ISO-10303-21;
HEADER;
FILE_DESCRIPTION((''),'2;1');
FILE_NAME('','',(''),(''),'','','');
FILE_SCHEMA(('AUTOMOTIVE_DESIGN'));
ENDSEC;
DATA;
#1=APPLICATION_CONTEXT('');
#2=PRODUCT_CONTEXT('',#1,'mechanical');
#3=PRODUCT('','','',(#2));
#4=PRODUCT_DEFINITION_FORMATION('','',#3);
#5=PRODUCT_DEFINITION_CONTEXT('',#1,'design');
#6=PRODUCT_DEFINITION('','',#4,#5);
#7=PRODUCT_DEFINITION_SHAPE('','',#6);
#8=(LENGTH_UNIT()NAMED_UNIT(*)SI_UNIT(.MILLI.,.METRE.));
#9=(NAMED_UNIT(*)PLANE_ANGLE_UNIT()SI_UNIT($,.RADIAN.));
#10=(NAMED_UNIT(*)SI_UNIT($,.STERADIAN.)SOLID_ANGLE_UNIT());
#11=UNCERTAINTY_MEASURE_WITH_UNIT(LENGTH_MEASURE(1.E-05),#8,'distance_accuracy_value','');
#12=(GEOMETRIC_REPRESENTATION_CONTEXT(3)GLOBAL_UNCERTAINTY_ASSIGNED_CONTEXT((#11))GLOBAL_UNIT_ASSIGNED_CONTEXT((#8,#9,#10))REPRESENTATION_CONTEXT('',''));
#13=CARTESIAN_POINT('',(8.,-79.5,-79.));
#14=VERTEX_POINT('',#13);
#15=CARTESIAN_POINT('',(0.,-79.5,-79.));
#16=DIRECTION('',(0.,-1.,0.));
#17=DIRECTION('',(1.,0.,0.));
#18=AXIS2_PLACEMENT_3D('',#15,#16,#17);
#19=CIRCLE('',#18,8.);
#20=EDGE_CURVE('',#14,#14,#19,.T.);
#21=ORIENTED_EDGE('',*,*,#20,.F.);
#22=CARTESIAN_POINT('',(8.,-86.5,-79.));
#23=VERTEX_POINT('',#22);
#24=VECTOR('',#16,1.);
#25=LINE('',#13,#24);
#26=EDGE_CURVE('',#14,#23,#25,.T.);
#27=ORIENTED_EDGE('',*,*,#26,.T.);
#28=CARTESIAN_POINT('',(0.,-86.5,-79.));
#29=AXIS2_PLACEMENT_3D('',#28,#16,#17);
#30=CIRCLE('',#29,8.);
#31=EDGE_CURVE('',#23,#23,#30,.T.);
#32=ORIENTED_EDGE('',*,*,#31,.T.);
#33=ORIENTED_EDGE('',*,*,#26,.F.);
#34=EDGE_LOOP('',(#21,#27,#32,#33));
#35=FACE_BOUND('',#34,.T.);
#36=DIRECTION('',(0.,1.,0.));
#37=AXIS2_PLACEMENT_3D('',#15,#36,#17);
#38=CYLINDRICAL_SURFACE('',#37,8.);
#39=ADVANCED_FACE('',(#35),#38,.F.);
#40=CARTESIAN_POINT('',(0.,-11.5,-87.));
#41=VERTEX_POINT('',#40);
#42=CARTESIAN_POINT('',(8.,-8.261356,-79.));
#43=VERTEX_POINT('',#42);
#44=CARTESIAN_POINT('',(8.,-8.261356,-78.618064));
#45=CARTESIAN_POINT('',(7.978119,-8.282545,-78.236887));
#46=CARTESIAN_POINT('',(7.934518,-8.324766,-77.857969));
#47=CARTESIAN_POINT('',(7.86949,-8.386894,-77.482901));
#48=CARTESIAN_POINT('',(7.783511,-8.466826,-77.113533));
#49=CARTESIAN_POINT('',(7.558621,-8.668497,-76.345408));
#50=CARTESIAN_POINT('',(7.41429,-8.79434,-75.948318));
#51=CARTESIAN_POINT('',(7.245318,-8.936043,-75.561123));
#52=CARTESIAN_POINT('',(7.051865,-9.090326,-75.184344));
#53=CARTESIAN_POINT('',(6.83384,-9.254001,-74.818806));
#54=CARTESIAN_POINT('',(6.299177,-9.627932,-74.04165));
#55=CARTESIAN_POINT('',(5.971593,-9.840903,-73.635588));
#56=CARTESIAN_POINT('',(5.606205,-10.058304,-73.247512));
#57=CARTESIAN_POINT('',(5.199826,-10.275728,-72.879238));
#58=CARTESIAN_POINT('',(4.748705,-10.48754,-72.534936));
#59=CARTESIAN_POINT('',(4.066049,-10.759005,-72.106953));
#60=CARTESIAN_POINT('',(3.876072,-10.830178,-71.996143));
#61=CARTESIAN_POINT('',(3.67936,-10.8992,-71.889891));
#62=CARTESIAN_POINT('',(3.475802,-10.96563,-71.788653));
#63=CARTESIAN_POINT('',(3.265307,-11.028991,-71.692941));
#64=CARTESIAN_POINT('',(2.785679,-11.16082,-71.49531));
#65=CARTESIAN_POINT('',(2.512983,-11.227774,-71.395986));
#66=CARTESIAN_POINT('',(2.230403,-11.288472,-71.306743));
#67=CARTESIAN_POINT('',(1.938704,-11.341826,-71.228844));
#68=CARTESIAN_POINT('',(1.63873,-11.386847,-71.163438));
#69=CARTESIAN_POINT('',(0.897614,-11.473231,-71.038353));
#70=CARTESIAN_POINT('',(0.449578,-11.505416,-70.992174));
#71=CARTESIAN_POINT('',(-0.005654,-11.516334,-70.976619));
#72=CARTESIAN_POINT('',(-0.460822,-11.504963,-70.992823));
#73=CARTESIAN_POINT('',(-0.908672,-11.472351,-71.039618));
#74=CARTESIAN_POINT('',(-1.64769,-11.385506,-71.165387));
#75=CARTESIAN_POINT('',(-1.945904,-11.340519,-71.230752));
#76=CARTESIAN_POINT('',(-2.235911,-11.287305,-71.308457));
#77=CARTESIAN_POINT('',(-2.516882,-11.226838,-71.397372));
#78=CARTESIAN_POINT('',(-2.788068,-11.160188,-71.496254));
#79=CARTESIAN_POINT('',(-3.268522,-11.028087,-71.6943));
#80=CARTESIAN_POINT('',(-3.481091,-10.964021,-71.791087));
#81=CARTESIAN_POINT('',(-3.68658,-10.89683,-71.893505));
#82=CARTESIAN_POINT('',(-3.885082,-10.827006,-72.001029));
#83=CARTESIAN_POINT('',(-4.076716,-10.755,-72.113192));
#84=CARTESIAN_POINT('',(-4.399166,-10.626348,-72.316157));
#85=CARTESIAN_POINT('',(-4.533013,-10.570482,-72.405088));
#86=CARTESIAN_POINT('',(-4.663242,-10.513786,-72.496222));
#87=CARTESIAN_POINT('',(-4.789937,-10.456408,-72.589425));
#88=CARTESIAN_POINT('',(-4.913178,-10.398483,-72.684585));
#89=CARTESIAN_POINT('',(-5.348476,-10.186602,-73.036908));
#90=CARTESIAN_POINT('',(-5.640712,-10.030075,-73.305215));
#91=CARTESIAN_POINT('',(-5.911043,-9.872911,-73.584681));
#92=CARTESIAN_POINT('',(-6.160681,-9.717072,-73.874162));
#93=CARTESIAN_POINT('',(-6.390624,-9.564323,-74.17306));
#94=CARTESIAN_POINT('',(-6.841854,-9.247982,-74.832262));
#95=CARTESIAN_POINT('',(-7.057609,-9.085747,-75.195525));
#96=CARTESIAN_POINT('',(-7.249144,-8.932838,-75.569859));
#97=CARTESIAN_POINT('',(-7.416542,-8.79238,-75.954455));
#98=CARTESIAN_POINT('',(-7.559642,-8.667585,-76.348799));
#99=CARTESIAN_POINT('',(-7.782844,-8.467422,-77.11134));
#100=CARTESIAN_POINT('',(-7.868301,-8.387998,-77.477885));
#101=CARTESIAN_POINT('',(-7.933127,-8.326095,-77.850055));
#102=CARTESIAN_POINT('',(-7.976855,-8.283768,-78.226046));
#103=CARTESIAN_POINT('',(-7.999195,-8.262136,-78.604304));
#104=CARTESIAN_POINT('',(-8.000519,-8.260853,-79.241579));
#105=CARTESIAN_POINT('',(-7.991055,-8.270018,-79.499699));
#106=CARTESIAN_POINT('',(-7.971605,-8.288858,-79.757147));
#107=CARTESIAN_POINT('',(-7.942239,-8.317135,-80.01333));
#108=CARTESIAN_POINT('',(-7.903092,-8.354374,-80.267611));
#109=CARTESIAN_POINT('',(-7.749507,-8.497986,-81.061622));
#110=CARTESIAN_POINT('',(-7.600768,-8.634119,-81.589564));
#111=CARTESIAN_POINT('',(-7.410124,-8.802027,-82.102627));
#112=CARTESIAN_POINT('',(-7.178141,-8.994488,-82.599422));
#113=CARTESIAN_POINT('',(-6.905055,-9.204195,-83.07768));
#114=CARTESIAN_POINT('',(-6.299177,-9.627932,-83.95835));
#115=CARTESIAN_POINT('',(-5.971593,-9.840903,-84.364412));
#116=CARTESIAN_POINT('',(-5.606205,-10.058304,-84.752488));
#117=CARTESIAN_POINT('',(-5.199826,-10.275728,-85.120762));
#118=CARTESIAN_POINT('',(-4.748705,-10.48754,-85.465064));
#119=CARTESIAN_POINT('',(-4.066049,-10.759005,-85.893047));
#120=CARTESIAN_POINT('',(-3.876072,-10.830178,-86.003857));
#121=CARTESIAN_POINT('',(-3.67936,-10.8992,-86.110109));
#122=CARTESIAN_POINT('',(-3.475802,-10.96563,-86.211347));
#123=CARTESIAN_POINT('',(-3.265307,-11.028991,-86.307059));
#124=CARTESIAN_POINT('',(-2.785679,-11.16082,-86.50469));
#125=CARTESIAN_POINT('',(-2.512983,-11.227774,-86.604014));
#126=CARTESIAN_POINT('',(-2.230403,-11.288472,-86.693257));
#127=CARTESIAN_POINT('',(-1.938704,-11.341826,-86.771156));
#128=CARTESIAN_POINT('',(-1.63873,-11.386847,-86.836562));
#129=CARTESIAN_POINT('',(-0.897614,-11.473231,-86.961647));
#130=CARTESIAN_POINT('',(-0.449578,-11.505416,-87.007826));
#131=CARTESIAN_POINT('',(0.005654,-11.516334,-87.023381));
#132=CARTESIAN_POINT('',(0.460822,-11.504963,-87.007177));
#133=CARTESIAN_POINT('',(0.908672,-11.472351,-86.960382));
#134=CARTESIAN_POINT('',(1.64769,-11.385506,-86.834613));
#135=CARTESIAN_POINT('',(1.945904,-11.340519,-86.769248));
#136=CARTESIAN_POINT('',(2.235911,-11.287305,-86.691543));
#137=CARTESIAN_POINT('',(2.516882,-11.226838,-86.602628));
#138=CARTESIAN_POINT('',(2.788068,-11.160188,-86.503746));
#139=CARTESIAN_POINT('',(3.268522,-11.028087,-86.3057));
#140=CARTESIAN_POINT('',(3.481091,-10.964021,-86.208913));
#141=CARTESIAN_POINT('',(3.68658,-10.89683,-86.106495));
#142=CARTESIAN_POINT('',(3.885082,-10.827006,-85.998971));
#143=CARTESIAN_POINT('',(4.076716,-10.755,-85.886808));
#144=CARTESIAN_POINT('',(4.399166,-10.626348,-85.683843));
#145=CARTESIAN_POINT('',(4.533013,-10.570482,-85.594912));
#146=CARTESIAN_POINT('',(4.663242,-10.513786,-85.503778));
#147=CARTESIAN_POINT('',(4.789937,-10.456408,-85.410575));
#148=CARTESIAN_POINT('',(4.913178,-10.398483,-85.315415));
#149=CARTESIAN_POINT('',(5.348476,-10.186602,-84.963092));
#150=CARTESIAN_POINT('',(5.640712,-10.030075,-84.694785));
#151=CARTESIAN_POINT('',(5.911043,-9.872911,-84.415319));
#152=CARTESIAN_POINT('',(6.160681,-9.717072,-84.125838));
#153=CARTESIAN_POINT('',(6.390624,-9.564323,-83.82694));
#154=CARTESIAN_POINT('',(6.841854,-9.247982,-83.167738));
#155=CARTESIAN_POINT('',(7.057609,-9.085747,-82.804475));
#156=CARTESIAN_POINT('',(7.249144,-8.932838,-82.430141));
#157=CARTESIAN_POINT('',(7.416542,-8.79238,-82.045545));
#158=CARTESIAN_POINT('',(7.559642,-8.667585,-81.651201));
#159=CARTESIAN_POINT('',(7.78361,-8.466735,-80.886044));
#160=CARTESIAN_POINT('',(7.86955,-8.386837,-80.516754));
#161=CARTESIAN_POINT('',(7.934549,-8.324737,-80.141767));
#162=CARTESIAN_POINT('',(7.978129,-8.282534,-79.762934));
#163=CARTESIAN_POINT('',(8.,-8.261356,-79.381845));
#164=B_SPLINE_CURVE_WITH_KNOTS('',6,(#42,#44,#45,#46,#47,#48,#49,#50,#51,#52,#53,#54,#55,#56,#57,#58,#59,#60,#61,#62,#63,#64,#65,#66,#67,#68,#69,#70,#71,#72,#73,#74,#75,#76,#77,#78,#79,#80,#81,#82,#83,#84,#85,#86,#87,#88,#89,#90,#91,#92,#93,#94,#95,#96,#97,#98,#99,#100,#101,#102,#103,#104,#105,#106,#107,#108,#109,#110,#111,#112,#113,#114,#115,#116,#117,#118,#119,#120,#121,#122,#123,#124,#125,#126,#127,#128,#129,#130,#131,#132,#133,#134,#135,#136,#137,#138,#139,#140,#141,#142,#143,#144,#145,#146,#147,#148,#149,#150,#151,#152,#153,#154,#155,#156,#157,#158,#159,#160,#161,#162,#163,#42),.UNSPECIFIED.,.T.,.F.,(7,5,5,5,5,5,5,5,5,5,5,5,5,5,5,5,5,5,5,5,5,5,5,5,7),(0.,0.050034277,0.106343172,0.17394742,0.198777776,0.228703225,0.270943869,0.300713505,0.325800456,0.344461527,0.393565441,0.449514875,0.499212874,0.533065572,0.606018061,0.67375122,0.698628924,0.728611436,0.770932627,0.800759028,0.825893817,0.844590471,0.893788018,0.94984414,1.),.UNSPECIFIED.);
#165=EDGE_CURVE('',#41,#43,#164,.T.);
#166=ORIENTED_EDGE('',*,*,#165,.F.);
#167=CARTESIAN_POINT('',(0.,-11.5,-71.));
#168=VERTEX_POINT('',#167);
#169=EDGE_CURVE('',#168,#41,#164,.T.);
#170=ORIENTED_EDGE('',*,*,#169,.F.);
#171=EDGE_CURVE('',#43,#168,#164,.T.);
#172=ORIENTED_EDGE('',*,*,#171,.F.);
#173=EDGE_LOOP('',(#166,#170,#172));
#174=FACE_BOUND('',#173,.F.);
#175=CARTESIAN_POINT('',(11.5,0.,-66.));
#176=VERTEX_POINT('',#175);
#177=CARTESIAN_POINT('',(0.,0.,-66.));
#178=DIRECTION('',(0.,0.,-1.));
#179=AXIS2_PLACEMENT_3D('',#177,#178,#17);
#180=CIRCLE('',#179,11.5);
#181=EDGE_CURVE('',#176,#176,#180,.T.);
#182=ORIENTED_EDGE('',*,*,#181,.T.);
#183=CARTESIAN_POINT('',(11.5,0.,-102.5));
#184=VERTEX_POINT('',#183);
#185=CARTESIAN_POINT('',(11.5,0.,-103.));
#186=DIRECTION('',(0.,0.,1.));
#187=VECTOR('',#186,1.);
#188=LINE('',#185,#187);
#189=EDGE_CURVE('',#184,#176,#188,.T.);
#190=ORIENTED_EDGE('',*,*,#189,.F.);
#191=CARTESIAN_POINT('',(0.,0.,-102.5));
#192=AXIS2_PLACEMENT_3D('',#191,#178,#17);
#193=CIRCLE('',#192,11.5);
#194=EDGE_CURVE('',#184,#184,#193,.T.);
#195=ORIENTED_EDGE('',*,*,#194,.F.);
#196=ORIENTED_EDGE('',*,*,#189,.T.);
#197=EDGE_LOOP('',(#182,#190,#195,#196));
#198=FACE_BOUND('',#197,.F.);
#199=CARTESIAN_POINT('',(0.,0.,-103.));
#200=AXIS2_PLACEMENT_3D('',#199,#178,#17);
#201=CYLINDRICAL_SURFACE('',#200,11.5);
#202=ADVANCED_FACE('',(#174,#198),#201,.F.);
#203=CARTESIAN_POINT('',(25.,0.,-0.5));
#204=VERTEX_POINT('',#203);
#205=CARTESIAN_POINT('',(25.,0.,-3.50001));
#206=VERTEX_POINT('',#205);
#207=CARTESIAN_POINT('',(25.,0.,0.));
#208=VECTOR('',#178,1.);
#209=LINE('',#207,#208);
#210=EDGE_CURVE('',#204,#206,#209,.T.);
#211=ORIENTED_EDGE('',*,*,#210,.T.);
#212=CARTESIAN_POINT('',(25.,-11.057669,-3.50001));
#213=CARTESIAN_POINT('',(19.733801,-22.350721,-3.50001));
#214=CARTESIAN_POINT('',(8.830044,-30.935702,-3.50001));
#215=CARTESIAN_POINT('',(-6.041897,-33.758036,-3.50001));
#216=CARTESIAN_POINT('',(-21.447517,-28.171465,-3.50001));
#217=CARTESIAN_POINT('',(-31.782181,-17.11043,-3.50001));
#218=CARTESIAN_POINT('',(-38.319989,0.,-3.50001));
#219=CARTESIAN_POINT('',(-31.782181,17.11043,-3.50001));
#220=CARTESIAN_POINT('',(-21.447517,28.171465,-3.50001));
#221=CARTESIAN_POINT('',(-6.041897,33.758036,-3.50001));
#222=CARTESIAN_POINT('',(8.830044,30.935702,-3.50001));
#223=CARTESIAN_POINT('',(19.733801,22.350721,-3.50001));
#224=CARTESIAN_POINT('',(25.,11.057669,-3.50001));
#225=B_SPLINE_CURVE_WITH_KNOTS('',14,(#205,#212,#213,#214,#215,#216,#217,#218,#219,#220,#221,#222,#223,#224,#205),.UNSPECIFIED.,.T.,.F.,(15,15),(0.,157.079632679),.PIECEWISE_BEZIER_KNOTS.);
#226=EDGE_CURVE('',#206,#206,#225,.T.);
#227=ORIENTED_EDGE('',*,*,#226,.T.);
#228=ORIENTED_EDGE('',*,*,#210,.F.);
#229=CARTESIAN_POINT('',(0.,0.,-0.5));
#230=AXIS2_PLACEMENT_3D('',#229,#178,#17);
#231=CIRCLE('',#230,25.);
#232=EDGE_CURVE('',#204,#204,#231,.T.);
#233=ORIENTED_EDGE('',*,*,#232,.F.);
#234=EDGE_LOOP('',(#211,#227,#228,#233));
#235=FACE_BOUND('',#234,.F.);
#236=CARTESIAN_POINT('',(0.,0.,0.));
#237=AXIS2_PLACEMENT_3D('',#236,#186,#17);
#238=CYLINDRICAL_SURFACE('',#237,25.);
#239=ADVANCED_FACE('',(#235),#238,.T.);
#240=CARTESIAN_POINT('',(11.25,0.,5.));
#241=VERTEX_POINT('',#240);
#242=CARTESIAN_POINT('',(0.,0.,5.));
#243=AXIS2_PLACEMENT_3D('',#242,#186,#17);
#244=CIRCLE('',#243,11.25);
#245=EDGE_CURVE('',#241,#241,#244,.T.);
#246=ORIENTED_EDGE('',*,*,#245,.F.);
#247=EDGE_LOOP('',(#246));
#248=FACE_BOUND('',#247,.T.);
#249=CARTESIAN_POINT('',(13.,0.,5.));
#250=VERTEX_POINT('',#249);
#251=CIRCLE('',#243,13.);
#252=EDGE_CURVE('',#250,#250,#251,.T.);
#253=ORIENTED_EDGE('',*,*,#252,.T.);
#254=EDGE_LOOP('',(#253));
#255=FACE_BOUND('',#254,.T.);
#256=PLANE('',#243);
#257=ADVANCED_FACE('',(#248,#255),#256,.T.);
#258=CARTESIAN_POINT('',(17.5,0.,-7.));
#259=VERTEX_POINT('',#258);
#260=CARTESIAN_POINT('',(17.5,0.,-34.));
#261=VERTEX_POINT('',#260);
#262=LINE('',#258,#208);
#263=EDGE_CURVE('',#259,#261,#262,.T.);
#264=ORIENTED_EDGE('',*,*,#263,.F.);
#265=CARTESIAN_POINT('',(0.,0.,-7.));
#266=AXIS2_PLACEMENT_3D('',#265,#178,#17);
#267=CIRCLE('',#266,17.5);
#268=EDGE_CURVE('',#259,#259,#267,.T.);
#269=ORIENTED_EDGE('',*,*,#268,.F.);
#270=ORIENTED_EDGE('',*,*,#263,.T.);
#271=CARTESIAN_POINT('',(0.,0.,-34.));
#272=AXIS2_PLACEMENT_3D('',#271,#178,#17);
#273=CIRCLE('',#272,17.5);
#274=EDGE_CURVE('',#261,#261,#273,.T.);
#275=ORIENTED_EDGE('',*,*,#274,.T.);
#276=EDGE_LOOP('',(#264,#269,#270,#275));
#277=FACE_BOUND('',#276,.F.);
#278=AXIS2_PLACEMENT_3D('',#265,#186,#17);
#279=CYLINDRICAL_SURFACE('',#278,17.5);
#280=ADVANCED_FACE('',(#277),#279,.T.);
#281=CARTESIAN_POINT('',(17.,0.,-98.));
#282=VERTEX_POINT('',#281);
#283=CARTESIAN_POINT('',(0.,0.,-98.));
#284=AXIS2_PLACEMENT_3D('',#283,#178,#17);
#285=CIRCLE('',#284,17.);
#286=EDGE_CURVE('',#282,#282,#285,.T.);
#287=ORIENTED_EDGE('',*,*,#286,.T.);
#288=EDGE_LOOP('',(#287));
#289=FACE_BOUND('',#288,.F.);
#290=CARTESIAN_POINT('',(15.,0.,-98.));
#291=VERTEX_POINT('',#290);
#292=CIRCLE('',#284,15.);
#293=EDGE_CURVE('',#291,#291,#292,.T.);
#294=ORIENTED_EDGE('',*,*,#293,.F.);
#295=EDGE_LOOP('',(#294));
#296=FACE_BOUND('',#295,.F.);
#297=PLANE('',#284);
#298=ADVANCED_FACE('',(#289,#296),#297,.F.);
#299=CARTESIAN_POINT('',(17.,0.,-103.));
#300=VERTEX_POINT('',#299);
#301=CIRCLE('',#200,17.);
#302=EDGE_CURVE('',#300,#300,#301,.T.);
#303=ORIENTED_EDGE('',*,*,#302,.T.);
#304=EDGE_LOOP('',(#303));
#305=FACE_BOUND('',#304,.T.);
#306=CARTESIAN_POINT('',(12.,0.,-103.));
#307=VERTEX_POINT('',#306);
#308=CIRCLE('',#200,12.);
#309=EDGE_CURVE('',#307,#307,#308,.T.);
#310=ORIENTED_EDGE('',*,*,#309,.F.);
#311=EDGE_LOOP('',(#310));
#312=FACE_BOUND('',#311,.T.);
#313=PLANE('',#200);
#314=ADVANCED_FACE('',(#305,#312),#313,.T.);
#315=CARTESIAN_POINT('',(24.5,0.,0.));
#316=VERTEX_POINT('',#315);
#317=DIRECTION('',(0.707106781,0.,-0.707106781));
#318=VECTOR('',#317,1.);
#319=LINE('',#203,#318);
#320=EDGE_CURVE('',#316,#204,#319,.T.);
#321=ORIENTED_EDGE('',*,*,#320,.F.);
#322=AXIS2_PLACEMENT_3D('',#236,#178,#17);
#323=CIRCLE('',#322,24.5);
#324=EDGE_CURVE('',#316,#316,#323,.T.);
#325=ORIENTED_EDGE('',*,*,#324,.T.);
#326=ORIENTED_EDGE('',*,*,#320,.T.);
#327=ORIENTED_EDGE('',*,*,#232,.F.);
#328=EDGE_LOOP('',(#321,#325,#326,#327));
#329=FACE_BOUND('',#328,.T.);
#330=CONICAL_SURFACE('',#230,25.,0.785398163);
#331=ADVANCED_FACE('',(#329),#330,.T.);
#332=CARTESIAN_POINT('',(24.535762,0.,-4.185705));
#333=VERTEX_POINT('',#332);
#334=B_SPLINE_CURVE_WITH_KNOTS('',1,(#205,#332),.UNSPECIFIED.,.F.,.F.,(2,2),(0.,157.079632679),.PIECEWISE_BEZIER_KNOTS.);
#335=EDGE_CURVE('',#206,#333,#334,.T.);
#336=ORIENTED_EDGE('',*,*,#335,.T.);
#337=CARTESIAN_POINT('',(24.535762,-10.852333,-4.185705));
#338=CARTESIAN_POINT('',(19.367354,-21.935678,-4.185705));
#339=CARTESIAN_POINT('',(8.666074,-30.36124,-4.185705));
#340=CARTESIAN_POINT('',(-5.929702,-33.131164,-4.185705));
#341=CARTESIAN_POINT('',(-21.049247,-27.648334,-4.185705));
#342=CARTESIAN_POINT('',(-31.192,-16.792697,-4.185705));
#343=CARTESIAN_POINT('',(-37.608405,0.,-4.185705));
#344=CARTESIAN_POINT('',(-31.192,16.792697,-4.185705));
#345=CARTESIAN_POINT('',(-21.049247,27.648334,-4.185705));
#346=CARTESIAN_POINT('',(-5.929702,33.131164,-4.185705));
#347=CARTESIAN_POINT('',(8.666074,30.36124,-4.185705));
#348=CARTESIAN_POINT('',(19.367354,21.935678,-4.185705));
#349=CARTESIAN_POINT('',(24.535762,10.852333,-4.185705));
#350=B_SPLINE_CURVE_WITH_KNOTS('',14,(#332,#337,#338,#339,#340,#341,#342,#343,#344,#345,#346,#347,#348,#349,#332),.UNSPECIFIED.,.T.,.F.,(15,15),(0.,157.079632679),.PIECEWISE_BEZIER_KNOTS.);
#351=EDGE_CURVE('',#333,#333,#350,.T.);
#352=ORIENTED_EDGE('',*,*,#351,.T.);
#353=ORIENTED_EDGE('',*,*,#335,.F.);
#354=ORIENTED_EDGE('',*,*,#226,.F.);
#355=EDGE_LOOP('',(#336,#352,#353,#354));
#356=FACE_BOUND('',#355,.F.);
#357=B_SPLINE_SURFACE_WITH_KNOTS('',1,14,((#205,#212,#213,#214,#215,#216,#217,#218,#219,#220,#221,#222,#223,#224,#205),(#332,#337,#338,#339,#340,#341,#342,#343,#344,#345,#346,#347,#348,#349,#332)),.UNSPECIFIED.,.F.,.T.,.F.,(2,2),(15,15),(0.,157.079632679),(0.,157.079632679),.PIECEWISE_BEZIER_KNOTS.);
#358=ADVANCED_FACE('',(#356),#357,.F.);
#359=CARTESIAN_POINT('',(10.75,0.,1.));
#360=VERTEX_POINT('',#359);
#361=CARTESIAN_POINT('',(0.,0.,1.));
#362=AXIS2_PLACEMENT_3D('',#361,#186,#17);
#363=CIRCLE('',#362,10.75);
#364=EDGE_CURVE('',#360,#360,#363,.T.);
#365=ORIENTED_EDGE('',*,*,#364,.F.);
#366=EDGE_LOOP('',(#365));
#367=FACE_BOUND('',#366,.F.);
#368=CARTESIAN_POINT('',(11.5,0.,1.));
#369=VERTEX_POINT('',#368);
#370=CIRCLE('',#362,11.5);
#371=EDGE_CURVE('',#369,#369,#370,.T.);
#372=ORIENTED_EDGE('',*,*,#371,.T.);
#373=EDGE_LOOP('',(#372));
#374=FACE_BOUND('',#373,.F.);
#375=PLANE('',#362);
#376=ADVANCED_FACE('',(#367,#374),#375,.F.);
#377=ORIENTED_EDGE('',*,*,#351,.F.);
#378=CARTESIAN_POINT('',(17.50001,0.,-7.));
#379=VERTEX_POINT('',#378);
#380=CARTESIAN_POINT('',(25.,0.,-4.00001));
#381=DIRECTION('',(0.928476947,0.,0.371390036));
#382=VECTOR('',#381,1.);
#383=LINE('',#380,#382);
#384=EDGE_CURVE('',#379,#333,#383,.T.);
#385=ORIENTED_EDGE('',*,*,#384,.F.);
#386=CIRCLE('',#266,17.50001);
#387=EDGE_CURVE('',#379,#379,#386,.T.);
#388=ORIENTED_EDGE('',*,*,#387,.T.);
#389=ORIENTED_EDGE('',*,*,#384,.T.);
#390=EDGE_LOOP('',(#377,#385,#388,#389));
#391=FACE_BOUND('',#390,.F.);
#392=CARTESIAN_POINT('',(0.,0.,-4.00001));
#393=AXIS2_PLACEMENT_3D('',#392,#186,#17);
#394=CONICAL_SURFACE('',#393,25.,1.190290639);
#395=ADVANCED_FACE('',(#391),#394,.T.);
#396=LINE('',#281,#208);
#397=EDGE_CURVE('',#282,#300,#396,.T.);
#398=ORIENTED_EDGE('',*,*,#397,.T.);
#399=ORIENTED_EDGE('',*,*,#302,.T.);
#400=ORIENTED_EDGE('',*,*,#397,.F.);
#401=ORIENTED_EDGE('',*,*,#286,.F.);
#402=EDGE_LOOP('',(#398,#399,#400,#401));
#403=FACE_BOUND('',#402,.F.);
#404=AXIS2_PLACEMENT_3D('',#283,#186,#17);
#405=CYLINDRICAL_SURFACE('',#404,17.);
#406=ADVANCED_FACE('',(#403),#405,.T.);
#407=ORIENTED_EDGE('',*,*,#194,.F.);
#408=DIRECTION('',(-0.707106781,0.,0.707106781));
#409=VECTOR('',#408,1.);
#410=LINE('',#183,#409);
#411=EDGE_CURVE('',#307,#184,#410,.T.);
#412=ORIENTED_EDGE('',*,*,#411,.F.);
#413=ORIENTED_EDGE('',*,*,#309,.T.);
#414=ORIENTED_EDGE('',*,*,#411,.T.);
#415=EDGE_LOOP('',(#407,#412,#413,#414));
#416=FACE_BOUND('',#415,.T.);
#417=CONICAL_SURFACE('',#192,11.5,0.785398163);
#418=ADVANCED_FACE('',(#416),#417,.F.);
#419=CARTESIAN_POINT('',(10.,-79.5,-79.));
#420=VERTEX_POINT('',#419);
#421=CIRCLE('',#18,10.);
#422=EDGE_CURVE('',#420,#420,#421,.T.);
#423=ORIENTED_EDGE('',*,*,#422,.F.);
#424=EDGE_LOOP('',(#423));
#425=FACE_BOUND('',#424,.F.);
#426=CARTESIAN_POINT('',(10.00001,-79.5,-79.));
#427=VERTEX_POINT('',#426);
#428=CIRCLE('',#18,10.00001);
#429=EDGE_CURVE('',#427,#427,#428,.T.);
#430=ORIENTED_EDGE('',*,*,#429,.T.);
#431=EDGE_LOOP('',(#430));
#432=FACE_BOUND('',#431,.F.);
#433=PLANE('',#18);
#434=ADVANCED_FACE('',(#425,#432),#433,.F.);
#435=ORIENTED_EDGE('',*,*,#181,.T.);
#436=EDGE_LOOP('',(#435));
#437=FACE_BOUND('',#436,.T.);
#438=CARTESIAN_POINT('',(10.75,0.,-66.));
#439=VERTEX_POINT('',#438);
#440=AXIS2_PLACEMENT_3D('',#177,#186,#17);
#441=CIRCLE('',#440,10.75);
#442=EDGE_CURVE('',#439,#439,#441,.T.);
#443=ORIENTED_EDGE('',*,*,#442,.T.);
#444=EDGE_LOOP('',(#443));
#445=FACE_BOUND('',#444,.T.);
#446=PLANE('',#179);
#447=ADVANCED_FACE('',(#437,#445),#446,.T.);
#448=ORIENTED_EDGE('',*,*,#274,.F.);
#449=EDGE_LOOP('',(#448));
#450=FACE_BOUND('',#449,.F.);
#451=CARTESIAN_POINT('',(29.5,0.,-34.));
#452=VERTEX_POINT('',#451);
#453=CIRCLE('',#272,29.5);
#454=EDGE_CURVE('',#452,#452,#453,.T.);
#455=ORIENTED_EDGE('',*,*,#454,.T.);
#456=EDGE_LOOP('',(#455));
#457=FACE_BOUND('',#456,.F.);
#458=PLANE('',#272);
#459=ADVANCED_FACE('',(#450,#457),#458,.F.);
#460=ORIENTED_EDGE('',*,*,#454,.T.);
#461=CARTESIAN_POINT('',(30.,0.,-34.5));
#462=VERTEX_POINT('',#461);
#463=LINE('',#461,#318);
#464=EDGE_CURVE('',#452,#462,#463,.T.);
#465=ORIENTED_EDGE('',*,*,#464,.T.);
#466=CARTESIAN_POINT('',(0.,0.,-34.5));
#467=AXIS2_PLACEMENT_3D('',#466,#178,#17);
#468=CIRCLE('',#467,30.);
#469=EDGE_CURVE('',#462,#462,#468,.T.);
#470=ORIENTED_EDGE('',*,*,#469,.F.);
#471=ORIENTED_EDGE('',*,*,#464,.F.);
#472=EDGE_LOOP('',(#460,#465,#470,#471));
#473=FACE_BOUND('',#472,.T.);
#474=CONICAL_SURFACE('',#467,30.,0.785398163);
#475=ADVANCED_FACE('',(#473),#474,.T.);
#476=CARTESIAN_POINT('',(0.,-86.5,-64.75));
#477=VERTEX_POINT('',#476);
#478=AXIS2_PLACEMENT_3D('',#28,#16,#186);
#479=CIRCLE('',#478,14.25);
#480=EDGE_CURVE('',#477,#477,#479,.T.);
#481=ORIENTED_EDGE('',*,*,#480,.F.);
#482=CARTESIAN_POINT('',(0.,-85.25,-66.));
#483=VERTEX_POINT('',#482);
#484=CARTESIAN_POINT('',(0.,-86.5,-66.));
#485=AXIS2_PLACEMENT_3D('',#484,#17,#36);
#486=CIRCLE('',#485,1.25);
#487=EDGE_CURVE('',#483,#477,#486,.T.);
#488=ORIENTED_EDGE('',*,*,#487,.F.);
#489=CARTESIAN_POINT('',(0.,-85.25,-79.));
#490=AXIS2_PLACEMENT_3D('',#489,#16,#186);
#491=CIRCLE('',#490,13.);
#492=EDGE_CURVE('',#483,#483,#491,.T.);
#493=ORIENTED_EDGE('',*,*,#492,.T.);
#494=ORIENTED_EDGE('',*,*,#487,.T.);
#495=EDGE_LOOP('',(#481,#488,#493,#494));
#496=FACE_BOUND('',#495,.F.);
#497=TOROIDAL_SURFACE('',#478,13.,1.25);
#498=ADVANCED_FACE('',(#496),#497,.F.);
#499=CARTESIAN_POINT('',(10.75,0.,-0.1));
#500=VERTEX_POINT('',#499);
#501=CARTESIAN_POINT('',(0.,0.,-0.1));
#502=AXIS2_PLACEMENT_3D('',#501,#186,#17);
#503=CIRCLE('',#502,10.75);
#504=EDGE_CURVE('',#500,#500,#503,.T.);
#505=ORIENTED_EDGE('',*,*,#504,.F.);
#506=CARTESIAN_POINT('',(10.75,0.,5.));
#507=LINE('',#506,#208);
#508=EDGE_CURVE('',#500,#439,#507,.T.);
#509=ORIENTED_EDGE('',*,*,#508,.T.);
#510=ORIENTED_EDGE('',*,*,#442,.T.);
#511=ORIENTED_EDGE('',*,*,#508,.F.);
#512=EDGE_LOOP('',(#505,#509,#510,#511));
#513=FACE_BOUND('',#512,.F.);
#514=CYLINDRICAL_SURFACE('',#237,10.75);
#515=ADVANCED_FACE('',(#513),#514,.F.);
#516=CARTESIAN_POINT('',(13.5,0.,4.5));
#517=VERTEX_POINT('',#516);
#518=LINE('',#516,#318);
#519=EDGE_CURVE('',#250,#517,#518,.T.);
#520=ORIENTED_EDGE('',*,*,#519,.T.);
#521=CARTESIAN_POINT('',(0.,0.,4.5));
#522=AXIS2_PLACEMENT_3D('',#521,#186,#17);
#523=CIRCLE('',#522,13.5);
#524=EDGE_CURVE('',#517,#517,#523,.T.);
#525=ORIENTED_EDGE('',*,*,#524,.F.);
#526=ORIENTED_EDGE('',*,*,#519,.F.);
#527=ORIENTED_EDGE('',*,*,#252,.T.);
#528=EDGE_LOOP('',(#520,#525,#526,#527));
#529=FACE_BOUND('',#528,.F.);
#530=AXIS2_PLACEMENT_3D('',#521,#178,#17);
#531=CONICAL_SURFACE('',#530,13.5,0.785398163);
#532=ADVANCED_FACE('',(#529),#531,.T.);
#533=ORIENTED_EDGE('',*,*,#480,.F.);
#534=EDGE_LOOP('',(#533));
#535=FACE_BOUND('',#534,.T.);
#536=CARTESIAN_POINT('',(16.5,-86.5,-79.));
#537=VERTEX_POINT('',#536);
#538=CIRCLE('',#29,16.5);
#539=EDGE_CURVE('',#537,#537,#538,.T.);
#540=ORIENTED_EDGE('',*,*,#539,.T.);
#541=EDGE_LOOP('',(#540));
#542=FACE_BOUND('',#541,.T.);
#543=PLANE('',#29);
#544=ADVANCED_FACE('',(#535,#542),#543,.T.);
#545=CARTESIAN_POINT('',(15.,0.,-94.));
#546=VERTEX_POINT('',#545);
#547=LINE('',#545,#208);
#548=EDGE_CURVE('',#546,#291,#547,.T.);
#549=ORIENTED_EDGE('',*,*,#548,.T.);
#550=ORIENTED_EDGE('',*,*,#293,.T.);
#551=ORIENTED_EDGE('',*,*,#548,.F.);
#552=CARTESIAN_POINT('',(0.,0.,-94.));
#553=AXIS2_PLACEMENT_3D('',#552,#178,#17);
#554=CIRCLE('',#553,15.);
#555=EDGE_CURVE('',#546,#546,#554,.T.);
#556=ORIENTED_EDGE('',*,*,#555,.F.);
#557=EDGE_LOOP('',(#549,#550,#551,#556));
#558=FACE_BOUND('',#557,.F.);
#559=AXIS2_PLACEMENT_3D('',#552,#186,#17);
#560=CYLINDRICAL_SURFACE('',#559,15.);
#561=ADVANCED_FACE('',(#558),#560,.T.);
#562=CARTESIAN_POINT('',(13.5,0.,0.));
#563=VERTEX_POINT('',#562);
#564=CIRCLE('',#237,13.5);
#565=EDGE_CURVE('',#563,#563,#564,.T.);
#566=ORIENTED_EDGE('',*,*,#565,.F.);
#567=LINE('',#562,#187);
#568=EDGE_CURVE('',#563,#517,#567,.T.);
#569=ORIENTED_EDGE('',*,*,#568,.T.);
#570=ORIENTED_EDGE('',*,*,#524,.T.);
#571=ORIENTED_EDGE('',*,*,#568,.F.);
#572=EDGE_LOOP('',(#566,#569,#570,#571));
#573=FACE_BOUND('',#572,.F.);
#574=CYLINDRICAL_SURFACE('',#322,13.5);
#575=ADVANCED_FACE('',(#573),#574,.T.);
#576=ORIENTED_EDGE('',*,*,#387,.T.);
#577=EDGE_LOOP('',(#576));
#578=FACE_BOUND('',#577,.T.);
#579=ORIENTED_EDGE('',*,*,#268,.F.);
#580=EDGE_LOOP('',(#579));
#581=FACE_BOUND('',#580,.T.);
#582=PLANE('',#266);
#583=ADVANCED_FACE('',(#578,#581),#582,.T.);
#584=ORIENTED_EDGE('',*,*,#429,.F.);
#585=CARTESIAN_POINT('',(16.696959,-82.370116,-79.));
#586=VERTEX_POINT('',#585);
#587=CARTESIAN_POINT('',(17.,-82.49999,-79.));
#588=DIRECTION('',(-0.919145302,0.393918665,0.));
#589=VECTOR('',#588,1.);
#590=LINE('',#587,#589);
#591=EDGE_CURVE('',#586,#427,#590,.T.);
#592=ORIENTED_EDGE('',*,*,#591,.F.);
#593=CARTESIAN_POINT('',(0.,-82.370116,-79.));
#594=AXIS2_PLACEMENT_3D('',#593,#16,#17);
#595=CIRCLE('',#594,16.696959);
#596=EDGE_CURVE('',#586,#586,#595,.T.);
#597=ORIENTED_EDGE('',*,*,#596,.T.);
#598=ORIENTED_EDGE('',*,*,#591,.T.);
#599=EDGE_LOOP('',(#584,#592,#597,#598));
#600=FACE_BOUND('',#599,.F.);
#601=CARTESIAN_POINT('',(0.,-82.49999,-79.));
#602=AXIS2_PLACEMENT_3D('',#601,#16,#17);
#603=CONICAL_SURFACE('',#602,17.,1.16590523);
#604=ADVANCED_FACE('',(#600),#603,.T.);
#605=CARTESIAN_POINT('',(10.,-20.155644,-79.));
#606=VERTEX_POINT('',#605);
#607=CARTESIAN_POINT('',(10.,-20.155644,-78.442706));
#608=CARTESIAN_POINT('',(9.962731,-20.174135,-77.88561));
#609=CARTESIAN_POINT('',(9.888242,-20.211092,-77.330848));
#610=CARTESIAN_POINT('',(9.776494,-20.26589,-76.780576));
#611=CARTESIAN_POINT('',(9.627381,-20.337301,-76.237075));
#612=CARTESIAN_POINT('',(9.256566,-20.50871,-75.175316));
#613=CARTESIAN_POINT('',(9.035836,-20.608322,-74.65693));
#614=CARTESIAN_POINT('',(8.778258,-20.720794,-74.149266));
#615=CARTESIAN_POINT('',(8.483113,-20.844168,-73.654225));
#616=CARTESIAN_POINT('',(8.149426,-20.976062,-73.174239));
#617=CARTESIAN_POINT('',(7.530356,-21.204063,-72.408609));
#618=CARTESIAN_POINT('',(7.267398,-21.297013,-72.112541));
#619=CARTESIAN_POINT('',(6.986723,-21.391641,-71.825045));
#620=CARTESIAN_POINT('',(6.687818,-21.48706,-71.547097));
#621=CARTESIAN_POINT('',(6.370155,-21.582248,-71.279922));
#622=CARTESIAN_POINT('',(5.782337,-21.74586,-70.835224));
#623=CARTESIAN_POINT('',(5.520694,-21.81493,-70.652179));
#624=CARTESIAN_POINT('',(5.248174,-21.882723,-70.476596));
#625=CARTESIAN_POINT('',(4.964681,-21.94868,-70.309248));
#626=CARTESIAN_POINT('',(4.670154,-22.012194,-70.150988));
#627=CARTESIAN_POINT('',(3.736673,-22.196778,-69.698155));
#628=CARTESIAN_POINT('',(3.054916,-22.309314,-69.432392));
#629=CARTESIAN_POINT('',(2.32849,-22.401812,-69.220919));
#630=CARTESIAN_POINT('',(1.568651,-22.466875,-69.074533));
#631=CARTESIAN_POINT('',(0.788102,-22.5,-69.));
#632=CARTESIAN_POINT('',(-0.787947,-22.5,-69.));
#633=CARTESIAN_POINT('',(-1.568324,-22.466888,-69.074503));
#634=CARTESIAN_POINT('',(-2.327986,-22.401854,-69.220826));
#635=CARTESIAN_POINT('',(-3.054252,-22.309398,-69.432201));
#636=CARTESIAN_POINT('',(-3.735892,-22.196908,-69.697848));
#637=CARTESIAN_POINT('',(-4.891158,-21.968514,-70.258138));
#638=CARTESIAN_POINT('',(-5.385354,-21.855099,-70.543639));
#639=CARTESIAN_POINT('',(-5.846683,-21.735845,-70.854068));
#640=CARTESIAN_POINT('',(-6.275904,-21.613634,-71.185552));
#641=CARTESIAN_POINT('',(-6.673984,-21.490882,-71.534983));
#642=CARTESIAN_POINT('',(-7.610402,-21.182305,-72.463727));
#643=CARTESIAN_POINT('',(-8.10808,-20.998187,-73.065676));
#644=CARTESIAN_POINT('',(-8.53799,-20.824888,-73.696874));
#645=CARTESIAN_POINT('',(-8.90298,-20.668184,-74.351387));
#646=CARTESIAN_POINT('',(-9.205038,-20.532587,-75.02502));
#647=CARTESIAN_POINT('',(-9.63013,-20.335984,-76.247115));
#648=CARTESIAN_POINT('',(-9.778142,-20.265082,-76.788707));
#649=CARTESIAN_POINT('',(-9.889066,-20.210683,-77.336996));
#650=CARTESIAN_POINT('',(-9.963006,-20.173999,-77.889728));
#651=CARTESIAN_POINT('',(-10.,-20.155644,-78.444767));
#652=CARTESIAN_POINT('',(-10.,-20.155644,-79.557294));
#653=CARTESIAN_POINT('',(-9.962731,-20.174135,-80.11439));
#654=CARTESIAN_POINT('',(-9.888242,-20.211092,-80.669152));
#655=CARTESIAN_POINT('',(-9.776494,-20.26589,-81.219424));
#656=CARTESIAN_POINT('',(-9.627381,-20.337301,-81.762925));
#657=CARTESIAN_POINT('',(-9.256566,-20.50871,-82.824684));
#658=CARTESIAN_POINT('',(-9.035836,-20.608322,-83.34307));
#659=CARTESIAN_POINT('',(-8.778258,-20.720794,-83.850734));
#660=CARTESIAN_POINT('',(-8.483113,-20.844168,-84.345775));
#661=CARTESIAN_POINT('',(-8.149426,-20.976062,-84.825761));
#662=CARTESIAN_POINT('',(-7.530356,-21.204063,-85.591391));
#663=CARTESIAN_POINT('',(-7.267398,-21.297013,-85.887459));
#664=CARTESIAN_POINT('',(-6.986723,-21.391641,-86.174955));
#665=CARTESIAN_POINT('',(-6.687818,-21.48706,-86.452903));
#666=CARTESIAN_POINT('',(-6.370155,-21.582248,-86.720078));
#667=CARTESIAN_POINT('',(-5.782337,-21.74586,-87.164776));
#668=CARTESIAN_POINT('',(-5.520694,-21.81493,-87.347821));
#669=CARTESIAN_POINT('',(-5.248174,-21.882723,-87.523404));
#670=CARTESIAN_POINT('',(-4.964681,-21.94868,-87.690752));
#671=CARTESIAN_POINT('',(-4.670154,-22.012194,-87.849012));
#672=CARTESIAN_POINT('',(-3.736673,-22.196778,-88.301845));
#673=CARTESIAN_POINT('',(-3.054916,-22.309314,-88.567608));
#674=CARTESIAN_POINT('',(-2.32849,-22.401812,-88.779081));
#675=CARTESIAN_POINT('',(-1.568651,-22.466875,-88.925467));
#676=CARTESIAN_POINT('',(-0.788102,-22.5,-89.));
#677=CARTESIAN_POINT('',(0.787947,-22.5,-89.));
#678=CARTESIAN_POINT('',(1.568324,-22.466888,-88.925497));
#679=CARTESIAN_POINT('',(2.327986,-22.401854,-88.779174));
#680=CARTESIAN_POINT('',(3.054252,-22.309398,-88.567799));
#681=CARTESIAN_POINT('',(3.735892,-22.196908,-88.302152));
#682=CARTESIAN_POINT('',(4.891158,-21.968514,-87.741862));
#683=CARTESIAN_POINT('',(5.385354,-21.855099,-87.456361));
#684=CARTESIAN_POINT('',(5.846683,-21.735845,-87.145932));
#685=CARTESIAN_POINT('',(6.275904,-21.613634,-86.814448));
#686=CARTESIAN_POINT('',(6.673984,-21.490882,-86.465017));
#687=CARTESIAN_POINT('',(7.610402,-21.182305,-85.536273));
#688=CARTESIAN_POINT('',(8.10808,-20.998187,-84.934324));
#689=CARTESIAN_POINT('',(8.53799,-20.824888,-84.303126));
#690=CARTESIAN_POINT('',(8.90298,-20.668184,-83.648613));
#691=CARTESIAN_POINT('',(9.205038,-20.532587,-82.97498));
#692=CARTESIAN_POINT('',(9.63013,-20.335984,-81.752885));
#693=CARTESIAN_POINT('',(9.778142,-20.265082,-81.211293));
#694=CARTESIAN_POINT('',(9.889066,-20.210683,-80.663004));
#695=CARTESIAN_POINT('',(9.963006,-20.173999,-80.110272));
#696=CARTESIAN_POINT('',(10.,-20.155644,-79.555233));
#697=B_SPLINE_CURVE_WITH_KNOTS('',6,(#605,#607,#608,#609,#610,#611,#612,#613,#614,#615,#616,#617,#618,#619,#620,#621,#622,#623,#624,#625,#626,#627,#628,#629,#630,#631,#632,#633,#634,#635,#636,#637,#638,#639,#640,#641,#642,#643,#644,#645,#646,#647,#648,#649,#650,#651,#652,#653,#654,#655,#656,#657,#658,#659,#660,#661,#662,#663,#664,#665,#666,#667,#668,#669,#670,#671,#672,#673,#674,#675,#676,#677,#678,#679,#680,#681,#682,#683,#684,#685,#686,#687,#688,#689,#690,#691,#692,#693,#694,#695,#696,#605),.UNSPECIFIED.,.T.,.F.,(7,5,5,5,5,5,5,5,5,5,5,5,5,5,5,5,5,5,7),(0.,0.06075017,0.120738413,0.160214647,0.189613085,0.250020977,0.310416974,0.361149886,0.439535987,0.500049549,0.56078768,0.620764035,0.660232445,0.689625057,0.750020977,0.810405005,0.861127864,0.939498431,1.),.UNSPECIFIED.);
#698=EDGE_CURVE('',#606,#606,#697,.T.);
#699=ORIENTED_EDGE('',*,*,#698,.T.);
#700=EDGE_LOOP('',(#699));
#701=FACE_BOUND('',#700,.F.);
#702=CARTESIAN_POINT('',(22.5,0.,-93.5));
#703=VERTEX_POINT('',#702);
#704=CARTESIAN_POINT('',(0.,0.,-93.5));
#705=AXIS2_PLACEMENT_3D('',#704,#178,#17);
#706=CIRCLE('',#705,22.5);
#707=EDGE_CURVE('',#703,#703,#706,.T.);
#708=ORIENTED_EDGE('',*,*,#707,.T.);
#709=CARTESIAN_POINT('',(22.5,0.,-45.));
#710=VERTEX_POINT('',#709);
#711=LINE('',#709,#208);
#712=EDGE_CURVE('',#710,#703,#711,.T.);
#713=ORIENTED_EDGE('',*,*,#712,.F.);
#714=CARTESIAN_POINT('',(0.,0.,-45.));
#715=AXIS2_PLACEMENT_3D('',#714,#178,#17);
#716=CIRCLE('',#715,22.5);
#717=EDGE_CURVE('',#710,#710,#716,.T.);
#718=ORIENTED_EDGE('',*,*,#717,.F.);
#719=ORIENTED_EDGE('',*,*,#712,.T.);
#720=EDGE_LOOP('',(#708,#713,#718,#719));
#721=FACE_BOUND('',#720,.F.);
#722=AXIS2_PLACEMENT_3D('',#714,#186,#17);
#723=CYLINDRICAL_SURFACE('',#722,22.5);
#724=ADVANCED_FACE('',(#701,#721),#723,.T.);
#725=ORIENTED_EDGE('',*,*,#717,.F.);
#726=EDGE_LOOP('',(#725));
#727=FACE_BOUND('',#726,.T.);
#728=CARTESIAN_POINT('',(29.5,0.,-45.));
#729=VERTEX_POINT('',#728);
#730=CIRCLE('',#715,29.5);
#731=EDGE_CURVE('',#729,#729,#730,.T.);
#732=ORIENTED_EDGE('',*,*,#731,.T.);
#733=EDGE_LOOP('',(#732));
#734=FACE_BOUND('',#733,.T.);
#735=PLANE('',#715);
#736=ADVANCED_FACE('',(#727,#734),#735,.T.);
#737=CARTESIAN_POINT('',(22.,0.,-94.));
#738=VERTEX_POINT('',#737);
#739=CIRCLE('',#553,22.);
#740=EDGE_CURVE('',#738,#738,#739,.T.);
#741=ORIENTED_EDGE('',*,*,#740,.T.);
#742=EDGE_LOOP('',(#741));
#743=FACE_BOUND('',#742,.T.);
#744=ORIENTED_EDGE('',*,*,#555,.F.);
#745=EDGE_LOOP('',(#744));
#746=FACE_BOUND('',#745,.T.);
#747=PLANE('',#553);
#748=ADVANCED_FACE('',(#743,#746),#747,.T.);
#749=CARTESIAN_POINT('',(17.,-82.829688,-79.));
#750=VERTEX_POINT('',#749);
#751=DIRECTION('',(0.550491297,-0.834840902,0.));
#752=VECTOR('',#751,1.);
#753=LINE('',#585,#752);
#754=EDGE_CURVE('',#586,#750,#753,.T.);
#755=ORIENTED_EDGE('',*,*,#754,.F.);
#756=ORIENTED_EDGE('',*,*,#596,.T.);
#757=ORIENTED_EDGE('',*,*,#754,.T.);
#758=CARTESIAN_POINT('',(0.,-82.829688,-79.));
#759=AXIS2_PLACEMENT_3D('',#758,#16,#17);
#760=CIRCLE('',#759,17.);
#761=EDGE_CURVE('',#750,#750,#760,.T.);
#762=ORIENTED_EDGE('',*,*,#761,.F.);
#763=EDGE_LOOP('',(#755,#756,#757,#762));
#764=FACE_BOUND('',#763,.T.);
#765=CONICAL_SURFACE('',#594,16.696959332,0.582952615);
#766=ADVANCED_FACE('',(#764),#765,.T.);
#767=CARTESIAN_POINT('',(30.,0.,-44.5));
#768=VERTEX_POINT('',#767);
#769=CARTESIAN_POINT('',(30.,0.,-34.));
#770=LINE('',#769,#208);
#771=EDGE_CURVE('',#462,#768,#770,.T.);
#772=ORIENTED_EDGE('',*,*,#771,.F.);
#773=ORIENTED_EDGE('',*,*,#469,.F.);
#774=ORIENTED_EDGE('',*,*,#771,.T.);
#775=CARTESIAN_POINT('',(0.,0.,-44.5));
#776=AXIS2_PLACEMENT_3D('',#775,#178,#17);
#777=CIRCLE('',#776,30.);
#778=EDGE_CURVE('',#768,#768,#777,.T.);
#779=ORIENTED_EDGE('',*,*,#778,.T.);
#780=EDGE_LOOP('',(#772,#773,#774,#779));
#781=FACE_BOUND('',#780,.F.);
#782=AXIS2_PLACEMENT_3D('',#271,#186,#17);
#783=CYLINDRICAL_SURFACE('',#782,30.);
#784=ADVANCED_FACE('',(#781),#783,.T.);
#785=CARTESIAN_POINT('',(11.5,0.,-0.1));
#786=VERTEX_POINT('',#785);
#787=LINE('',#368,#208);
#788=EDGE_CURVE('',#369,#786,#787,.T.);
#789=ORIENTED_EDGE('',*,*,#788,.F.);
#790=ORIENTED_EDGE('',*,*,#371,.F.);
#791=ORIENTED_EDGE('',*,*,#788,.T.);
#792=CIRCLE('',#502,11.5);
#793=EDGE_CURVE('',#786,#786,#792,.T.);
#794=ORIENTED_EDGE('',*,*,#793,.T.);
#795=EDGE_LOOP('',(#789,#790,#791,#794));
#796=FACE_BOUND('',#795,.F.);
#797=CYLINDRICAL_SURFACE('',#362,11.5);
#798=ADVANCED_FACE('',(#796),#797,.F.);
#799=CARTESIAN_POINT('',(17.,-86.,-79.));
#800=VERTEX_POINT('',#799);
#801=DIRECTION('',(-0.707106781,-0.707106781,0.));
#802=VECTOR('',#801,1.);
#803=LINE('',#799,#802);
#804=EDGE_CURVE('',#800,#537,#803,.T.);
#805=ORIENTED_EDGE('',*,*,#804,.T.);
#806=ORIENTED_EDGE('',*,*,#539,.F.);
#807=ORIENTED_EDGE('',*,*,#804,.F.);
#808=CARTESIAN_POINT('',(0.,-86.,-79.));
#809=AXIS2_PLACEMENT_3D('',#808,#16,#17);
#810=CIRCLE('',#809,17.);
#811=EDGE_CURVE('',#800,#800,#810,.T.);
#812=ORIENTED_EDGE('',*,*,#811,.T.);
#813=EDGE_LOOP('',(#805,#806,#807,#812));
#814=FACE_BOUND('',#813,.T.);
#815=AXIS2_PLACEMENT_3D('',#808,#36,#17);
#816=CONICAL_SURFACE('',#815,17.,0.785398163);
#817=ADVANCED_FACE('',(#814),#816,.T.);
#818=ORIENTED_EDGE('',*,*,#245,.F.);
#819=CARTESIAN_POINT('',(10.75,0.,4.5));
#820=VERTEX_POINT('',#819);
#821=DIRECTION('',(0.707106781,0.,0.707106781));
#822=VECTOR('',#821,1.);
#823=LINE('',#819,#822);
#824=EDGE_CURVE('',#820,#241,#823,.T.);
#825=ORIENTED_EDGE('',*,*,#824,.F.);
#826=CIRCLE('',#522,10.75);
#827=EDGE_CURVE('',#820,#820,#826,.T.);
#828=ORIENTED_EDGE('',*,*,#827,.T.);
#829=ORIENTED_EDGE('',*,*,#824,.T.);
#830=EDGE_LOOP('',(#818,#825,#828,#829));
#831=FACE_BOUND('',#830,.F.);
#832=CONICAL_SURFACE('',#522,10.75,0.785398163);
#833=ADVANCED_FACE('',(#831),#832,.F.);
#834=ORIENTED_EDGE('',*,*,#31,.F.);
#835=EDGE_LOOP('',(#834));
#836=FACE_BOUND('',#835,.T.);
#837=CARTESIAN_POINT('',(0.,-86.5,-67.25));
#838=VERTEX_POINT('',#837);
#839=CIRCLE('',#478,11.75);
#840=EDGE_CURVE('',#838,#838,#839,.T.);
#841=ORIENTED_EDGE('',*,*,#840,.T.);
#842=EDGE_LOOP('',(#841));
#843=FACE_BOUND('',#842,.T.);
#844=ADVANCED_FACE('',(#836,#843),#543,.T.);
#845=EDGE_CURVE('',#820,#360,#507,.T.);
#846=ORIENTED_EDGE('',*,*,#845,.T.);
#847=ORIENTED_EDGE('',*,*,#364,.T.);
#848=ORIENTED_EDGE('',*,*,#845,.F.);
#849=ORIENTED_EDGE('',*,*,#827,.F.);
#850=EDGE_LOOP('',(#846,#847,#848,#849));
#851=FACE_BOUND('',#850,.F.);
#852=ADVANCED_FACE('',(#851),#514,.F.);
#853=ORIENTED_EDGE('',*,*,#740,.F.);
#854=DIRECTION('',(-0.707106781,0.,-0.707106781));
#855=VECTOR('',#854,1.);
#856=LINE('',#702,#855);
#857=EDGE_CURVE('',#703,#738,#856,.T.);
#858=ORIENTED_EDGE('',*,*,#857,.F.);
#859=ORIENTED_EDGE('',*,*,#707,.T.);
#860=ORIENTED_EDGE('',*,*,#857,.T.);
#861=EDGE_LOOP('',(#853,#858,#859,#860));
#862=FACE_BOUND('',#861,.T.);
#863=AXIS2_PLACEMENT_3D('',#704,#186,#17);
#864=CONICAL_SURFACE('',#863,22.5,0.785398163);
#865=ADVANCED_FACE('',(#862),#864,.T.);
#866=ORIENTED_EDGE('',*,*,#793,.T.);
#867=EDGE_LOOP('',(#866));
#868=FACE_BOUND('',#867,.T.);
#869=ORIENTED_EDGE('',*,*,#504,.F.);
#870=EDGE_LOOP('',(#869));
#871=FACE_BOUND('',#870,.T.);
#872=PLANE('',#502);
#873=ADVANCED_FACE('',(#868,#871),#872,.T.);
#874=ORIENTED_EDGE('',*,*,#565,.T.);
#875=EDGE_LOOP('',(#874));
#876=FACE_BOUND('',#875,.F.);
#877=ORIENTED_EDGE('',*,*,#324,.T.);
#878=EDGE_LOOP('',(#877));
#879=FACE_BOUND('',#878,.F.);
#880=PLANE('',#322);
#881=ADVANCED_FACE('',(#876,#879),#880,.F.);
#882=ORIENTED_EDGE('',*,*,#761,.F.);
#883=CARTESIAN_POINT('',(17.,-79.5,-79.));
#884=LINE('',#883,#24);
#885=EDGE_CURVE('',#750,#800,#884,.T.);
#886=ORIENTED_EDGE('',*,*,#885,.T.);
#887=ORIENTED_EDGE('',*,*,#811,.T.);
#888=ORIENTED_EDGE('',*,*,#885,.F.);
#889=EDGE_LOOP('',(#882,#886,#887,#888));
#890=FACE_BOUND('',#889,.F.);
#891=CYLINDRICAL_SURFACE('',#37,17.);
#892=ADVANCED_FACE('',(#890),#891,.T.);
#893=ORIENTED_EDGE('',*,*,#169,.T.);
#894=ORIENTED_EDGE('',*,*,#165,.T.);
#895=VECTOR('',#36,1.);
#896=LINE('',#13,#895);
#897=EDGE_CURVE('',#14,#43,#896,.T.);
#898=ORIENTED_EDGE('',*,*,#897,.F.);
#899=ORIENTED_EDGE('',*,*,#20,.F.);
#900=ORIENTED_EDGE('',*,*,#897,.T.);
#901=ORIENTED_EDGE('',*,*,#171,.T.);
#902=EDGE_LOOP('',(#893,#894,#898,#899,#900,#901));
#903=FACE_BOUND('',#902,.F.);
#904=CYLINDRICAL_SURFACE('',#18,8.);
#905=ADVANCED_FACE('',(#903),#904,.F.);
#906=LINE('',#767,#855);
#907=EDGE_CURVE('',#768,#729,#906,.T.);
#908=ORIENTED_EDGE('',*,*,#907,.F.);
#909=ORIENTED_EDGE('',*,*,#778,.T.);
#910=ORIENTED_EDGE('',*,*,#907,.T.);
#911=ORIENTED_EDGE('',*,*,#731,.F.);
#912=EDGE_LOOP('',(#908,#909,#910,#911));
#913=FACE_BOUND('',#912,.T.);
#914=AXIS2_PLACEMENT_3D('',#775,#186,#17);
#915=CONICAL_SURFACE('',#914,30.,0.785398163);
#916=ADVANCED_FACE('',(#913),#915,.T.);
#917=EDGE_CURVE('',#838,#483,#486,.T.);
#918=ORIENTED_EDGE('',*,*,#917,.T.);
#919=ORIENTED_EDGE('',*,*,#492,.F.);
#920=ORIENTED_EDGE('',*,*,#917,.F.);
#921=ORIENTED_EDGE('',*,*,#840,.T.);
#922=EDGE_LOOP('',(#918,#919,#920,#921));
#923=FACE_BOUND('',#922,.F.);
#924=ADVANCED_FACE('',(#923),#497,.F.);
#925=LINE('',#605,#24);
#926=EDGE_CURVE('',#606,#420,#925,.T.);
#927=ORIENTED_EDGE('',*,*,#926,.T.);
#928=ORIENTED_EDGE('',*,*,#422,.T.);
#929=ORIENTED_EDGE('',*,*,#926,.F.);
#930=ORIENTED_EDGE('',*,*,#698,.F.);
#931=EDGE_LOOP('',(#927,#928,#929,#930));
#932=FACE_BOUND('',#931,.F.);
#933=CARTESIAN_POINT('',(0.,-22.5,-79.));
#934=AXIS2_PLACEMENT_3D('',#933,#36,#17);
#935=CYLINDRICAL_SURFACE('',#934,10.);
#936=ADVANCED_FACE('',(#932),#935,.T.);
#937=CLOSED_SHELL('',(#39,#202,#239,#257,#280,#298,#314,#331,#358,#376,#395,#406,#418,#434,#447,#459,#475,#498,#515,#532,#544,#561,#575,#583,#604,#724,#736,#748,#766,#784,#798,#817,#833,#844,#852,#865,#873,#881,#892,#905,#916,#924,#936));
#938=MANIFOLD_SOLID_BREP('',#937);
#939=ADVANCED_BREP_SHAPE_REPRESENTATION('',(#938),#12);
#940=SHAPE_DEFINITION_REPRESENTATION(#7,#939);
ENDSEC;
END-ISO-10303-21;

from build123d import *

# Parameters (mm, degrees)
F0_R           = 13.5
F0_R_2         = 10.75
F1_DEPTH       = 5
F2_R           = 25
F2_R_2         = 13.5
F2_R_3         = 10.75
F3_DEPTH       = 7
F4_R           = 17.5
F5_DEPTH       = 27
F6_R           = 30
F6_R_2         = 17.5
F7_DEPTH       = 11
F8_R           = 22.5
F9_DEPTH       = 49
F10_R          = 15
F11_DEPTH      = 4
F12_R          = 17
F12_R_2        = 15
F13_DEPTH      = 5
F14_R          = 11.5
F15_DEPTH      = 37
F16_R          = 10.75
F17_DEPTH      = 103.001
F18_SIZE       = 0.5
F19_SIZE2      = 2.99999
F19_SIZE       = 7.49999
F20_SIZE       = 0.5
F22_R          = 10
F23_DEPTH      = 57
F23_DEPTH_BACK = 11
F24_R          = 8
F25_DEPTH      = 71.2396442793
F26_R          = 17
F26_R_2        = 10
F26_R_3        = 8
F27_DEPTH      = 7
F28_SIZE2      = 6.99999
F28_SIZE       = 2.99999
F30_R          = 1.25
F33_R          = 11.5
F34_DEPTH      = 1.1


# Not quite as in the source:
# - a fillet or chamfer that OpenCascade refuses, or shapes differently, is made with other operations: its cross-section is extruded or revolved along the edge and cut away or added
# - a fillet or chamfer is up to 0.001 mm smaller than in the source, because OpenCascade refuses the exact size


with BuildPart() as f1:
    # F0 (on Top) → F1 (new body)
    with BuildSketch(Plane.XY):
        Circle(F0_R)
        Circle(F0_R_2, mode=Mode.SUBTRACT)
    extrude(amount=F1_DEPTH)

    # F2 (on face) → F3 (join)
    with BuildSketch(Plane(origin=(0, 0, 0), x_dir=(1, 0, 0), z_dir=(0, 0, -1))):
        Circle(F2_R)
        Circle(F2_R_2, mode=Mode.SUBTRACT)
        Circle(F2_R_2)
        Circle(F2_R_3, mode=Mode.SUBTRACT)
    extrude(amount=F3_DEPTH)

    # F4 (on face) → F5 (join)
    with BuildSketch(Plane(origin=(0, 0, -7), x_dir=(1, 0, 0), z_dir=(0, 0, -1))):
        Circle(F4_R)
    extrude(amount=F5_DEPTH)

    # F6 (on face) → F7 (join)
    with BuildSketch(Plane(origin=(0, 0, -34), x_dir=(1, 0, 0), z_dir=(0, 0, -1))):
        Circle(F6_R)
        Circle(F6_R_2, mode=Mode.SUBTRACT)
        Circle(F6_R_2)
    extrude(amount=F7_DEPTH)

    # F8 (on face) → F9 (join)
    with BuildSketch(Plane(origin=(0, 0, -45), x_dir=(1, 0, 0), z_dir=(0, 0, -1))):
        Circle(F8_R)
    extrude(amount=F9_DEPTH)

    # F10 (on face) → F11 (join)
    with BuildSketch(Plane(origin=(0, 0, -94), x_dir=(1, 0, 0), z_dir=(0, 0, -1))):
        Circle(F10_R)
    extrude(amount=F11_DEPTH)

    # F12 (on face) → F13 (join)
    with BuildSketch(Plane(origin=(0, 0, -98), x_dir=(1, 0, 0), z_dir=(0, 0, -1))):
        Circle(F12_R)
        Circle(F12_R_2, mode=Mode.SUBTRACT)
        Circle(F12_R_2)
    extrude(amount=F13_DEPTH)

    # F14 (on face) → F15 (cut)
    with BuildSketch(Plane(origin=(0, 0, -103), x_dir=(1, 0, 0), z_dir=(0, 0, -1))):
        Circle(F14_R)
    extrude(amount=-F15_DEPTH, mode=Mode.SUBTRACT)

    # F16 (on face) → F17 (cut, through all)
    with BuildSketch(Plane.XY):
        Circle(F16_R)
    extrude(amount=-F17_DEPTH, mode=Mode.SUBTRACT)

    # F18
    f18_edges = [f1.edges().sort_by_distance(p)[0] for p in [
        (-11.5, 0, -103),
        (-22.5, 0, -94),
        (-30, 0, -45),
        (-30, 0, -34),
        (-25, 0, 0),
        (-13.5, 0, 5),
        (-10.75, 0, 5),
    ]]
    chamfer(f18_edges, length=F18_SIZE)

    # F19 (size 7.5 and 3 in the source; OpenCascade refuses exactly that, so slightly less here)
    f19_edges = [f1.edges().sort_by_distance(p)[0] for p in [
        (-25, 0, -7),
    ]]
    f19_side = f1.faces().sort_by_distance((-24.292893, 0, -7))[0]
    chamfer(f19_edges, length=F19_SIZE, length2=F19_SIZE2, reference=f19_side)

    # F20
    f20_edges = [f1.edges().sort_by_distance(p)[0] for p in [
        (-25, 0, -4.00001),
    ]]
    chamfer(f20_edges, length=F20_SIZE)

    # F22 (on offset) → F23 (join, two sides)
    with BuildSketch(Plane.XZ.offset(22.5)) as f23_sk:
        with Locations((0, -79)):
            Circle(F22_R)
    extrude(amount=F23_DEPTH)
    extrude(f23_sk.sketch, amount=-F23_DEPTH_BACK)

    # F24 (on face) → F25 (cut, through all)
    with BuildSketch(Plane.XZ.offset(79.5)):
        with Locations((0, -79)):
            Circle(F24_R)
    extrude(amount=-F25_DEPTH, mode=Mode.SUBTRACT)

    # F26 (on face) → F27 (join)
    with BuildSketch(Plane.XZ.offset(79.5)):
        with Locations((0, -79)):
            Circle(F26_R)
        with Locations((0, -79)):
            Circle(F26_R_2, mode=Mode.SUBTRACT)
        with Locations((0, -79)):
            Circle(F26_R_2)
        with Locations((0, -79)):
            Circle(F26_R_3, mode=Mode.SUBTRACT)
    extrude(amount=F27_DEPTH)

    # F28 (size 3 and 7 in the source; OpenCascade refuses exactly that, so slightly less here)
    f28_edges = [f1.edges().sort_by_distance(p)[0] for p in [
        (-17, -79.5, -79),
    ]]
    f28_side = f1.faces().sort_by_distance((-17, -83, -79))[0]
    chamfer(f28_edges, length=F28_SIZE, length2=F28_SIZE2, reference=f28_side)

    # F29: chamfer of 0.5 on 2 edges, made by hand

    # F29_s1 → F29_t2 (revolve, cut)
    with BuildSketch(Plane.XY.offset(-79)):
        Polygon((17, -86), (16.5, -86.5), (17, -86.5), align=None)
    revolve(axis=Axis((0, -86.5, -79), (0, -1, 0)), mode=Mode.SUBTRACT)

    # F29_s3 → F29_t4 (revolve, cut)
    with BuildSketch(Plane.XY.offset(-79)):
        Polygon((16.6969593323, -82.3701156755), (17, -82.8296883264), (17, -82.49999), align=None)
    revolve(axis=Axis((0, -82.49999, -79), (0, -1, 0)), mode=Mode.SUBTRACT)

    # F30 (on Right) → F31 (revolve, cut)
    with BuildSketch(Plane.YZ):
        with Locations((-86.5, -66)):
            Circle(F30_R)
    revolve(axis=Axis((0, -66.6620582342, -79), (0, -1, 0)), mode=Mode.SUBTRACT)

    # F33 (on offset) → F34 (cut)
    with BuildSketch(Plane.XY.offset(1)):
        Circle(F33_R)
    extrude(amount=-F34_DEPTH, mode=Mode.SUBTRACT)


solid = f1.part
